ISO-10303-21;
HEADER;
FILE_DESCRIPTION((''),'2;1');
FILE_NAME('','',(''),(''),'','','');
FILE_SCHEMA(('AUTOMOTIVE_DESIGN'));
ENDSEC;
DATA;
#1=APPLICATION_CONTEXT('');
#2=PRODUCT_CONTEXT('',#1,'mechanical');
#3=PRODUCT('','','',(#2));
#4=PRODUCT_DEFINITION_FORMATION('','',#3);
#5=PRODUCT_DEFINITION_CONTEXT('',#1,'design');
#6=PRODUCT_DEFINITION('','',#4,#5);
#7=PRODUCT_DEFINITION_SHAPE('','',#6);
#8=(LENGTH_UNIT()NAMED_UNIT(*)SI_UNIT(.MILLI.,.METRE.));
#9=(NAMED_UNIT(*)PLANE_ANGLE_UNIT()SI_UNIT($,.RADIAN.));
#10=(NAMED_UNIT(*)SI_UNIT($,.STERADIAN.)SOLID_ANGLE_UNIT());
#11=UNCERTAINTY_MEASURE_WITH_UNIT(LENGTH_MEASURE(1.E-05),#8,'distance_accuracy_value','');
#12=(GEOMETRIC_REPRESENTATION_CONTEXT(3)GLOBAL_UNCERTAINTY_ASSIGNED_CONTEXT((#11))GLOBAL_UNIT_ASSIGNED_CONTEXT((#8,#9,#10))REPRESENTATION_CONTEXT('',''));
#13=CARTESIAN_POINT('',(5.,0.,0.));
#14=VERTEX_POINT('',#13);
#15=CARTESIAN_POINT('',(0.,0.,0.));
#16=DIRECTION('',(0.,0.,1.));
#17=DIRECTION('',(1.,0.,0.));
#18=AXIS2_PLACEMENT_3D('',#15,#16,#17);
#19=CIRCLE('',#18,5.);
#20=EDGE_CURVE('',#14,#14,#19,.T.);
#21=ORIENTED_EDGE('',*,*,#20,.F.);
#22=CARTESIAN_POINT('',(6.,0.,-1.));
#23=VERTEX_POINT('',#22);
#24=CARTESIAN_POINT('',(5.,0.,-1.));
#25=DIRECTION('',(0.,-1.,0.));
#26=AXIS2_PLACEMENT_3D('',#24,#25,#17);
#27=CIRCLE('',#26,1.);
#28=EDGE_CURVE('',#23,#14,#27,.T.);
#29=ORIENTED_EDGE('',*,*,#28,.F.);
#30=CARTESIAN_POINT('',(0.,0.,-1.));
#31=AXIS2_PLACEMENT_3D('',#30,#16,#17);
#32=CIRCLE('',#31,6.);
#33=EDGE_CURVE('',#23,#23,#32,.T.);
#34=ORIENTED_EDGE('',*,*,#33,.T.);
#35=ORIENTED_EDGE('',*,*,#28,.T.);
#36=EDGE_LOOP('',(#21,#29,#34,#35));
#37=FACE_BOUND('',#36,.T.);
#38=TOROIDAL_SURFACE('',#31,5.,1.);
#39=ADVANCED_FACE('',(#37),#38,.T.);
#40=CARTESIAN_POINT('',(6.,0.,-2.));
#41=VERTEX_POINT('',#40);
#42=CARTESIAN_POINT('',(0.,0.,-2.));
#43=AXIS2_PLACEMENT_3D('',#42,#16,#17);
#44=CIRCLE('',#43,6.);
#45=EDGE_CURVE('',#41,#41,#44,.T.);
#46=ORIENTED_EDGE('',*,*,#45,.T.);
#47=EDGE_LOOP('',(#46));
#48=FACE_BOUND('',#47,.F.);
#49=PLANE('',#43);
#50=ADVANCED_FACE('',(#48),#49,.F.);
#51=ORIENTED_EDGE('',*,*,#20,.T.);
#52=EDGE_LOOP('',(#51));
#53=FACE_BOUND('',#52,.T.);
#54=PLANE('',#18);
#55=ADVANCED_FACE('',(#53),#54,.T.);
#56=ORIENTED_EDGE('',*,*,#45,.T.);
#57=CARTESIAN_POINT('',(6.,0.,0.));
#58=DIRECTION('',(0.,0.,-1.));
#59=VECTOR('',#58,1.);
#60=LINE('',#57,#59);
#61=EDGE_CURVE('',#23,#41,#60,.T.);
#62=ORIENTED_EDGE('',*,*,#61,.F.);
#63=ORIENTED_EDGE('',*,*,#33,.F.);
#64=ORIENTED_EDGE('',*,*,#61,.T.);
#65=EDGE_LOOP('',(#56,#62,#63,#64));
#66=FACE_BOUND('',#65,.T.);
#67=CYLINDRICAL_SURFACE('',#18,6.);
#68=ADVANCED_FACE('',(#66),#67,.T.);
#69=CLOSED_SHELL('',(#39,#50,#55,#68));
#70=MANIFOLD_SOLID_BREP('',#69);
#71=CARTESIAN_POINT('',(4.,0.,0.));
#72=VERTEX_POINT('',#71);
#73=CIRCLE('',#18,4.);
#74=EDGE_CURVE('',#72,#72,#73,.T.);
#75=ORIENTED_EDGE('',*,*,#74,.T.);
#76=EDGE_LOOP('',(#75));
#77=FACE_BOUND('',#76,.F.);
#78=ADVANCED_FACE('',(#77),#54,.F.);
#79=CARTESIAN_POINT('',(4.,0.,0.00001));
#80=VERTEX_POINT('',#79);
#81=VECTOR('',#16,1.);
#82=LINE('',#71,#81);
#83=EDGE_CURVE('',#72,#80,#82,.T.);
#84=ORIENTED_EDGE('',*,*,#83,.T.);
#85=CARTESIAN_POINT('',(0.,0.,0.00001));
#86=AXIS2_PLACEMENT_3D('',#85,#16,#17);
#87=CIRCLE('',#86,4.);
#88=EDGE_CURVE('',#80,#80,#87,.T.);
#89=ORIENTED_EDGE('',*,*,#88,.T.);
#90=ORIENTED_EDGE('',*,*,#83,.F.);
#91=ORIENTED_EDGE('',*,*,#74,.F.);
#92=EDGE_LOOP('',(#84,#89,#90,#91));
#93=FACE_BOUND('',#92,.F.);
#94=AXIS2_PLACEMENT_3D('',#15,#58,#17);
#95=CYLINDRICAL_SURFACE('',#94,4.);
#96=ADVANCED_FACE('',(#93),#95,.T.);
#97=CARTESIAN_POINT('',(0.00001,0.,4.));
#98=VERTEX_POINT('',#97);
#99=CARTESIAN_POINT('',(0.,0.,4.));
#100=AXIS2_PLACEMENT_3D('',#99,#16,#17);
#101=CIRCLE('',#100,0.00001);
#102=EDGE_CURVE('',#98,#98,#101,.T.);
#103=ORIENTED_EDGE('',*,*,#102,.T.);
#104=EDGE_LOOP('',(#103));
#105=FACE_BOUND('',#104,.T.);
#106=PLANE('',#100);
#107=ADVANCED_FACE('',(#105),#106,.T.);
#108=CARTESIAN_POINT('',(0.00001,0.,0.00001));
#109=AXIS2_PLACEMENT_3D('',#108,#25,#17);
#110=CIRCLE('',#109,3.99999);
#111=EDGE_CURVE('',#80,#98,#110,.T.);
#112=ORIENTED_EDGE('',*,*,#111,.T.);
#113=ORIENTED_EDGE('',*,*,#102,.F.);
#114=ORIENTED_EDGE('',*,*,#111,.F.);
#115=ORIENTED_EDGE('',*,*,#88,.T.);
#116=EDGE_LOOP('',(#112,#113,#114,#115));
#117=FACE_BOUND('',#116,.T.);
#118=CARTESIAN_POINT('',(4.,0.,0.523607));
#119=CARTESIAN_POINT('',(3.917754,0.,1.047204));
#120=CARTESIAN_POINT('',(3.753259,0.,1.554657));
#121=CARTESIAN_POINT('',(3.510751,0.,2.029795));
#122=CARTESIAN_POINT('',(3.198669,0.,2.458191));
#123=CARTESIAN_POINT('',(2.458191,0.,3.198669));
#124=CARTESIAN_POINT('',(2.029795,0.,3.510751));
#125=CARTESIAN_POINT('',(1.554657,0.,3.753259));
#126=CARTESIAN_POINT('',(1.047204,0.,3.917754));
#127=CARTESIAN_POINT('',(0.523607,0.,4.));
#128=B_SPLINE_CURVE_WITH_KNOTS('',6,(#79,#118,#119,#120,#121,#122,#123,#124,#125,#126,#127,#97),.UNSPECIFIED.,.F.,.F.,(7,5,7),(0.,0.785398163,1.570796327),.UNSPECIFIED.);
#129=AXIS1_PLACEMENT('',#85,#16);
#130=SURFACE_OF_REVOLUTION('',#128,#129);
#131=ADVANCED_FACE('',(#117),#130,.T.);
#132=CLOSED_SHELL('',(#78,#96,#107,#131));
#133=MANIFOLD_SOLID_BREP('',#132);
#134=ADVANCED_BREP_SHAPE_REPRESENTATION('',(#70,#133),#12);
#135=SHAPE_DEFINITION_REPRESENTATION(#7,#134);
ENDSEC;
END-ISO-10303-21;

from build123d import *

# Parameters (mm, degrees)
F0_R     = 4
F1_DEPTH = 4
F2_R     = 3.99999
F3_R     = 6
F4_DEPTH = 2
F5_R     = 1


# Not quite as in the source:
# - a fillet or chamfer is up to 0.001 mm smaller than in the source, because OpenCascade refuses the exact size


with BuildPart() as f1:
    # F0 (on Top) → F1 (new body)
    with BuildSketch(Plane.XY):
        Circle(F0_R)
    extrude(amount=F1_DEPTH)

    # F2 (radius 4 in the source; OpenCascade refuses exactly that, so slightly less here)
    f2_edges = [f1.edges().sort_by_distance(p)[0] for p in [
        (-4, 0, 4),
    ]]
    fillet(f2_edges, radius=F2_R)


with BuildPart() as f4:
    # F3 (on Top) → F4 (new body)
    with BuildSketch(Plane.XY):
        Circle(F3_R)
    extrude(amount=-F4_DEPTH)

    # F5
    f5_edges = [f4.edges().sort_by_distance(p)[0] for p in [
        (-6, 0, 0),
    ]]
    fillet(f5_edges, radius=F5_R)


solid = Compound([f1.part, f4.part])
